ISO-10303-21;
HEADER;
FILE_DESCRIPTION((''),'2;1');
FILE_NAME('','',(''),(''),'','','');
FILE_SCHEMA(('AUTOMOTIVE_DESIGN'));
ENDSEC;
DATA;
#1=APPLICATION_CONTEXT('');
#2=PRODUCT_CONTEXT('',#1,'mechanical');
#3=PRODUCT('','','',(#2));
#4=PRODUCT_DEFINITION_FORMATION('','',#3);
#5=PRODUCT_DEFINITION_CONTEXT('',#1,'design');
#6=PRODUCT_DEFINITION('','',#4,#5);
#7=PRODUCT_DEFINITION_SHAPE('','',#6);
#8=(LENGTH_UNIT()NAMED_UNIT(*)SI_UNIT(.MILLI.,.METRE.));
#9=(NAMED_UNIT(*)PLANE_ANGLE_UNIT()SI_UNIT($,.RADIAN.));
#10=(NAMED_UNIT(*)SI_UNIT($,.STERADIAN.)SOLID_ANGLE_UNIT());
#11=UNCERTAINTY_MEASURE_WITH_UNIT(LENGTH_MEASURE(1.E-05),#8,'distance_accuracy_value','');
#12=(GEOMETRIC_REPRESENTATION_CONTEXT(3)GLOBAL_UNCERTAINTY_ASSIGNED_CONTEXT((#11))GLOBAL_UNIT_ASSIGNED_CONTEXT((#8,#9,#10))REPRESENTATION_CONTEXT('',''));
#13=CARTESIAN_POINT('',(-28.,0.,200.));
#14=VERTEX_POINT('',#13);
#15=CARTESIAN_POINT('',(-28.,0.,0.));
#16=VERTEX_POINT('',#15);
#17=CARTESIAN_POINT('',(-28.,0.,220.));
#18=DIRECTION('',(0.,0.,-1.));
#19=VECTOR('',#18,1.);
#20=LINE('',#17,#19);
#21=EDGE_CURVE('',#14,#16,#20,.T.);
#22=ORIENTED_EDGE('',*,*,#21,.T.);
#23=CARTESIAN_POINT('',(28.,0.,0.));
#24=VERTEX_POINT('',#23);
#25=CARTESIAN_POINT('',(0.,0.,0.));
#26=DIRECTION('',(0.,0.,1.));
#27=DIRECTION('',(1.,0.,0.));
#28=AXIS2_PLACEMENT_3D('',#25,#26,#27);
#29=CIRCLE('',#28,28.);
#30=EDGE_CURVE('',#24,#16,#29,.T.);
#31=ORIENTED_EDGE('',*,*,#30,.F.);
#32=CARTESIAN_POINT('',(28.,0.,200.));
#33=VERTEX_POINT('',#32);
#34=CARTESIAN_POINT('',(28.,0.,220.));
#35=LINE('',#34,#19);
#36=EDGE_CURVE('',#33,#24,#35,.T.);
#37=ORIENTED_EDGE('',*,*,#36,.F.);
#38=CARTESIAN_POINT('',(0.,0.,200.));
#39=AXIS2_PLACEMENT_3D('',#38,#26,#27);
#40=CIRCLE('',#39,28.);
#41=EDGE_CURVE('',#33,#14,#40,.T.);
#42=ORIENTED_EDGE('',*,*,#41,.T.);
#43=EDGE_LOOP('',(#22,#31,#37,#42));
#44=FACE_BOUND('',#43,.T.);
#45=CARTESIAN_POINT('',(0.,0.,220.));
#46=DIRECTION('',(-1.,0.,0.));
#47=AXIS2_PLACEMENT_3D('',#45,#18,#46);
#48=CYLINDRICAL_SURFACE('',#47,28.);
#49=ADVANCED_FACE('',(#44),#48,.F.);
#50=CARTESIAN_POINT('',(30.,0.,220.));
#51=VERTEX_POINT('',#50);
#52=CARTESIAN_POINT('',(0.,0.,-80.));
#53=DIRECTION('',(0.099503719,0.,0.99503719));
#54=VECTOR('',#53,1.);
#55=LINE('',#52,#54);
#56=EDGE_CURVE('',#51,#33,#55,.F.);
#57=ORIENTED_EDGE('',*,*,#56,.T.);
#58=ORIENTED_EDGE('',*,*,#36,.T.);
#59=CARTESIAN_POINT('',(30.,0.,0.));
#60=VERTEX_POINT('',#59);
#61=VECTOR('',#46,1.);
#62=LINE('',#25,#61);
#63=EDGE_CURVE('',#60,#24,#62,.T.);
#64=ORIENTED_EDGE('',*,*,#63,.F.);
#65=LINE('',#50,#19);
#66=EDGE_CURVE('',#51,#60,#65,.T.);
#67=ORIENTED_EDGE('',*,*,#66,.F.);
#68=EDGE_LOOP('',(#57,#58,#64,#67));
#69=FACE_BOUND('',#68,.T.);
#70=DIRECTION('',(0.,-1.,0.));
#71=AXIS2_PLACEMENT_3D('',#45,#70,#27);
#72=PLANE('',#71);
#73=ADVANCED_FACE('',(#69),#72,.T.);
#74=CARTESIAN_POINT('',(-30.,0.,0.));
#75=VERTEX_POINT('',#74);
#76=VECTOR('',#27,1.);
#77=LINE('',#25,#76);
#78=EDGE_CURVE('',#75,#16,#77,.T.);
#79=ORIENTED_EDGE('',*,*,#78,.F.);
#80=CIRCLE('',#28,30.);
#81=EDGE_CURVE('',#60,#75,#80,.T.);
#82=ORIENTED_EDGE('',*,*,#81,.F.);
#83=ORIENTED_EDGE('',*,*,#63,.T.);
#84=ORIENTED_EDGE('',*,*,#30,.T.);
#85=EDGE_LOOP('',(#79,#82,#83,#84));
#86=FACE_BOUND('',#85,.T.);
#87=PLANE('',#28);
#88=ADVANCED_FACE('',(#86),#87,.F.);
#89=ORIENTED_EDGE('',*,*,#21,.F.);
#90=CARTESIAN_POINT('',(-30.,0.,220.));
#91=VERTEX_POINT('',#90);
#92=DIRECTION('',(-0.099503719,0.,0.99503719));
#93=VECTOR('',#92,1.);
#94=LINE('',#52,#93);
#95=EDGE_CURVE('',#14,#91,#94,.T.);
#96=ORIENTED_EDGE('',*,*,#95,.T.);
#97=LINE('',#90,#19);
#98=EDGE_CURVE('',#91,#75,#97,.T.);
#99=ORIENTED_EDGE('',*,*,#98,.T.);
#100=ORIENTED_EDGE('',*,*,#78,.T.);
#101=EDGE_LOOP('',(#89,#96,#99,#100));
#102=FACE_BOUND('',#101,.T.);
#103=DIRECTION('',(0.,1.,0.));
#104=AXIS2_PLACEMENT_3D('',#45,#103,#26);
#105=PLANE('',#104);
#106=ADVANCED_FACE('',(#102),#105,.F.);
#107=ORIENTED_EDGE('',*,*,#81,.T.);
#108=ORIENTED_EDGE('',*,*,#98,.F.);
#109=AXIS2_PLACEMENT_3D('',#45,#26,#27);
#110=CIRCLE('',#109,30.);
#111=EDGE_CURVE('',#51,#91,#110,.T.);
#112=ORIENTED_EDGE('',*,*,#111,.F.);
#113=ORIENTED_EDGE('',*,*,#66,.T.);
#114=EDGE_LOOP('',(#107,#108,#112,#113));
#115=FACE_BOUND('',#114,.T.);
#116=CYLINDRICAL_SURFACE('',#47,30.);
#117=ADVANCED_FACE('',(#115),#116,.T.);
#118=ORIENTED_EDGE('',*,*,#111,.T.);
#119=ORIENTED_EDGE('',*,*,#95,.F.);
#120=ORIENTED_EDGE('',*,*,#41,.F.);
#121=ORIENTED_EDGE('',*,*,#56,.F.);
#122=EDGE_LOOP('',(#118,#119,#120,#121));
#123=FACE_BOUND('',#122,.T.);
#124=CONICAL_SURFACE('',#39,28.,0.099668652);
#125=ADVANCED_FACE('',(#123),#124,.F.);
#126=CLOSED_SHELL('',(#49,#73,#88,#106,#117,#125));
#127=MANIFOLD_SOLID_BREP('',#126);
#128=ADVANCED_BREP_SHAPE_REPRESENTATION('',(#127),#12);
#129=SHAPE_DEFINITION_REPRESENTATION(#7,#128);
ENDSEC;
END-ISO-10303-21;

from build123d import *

# Parameters (mm, degrees)
BOSS_EXTRUDE1_DEPTH = 220
CHAMFER1_SIZE       = 20
CHAMFER1_SIZE_2     = 2


with BuildPart() as part:
    # Sketch1 → Boss-Extrude1 (new body)
    with BuildSketch(Plane.XY):
        with BuildLine():
            ThreePointArc((28, 0), (0, 28), (-28, 0))
            Line((-28, 0), (-30, 0))
            ThreePointArc((-30, 0), (0, 30), (30, 0))
            Line((30, 0), (28, 0))
        make_face()
    extrude(amount=BOSS_EXTRUDE1_DEPTH)

    # Chamfer1
    # the kernel refuses this chamfer: 20, 2 mm, written as the material it takes off along each edge
    with BuildSketch(Plane(origin=(0, 0, 220), x_dir=(0.0031415874858789516, -0.9999950652018582, 0), z_dir=(-0.9999950652018582, -0.0031415874858789516, 0))) as chamfer1_piece_1:
        Polygon((28, -CHAMFER1_SIZE), (28 + CHAMFER1_SIZE_2, 0), (28, 0), align=None)
    revolve(axis=Axis((0, 0, 220), (0, 0, 1)), revolution_arc=359.64, mode=Mode.SUBTRACT)


solid = part.part
